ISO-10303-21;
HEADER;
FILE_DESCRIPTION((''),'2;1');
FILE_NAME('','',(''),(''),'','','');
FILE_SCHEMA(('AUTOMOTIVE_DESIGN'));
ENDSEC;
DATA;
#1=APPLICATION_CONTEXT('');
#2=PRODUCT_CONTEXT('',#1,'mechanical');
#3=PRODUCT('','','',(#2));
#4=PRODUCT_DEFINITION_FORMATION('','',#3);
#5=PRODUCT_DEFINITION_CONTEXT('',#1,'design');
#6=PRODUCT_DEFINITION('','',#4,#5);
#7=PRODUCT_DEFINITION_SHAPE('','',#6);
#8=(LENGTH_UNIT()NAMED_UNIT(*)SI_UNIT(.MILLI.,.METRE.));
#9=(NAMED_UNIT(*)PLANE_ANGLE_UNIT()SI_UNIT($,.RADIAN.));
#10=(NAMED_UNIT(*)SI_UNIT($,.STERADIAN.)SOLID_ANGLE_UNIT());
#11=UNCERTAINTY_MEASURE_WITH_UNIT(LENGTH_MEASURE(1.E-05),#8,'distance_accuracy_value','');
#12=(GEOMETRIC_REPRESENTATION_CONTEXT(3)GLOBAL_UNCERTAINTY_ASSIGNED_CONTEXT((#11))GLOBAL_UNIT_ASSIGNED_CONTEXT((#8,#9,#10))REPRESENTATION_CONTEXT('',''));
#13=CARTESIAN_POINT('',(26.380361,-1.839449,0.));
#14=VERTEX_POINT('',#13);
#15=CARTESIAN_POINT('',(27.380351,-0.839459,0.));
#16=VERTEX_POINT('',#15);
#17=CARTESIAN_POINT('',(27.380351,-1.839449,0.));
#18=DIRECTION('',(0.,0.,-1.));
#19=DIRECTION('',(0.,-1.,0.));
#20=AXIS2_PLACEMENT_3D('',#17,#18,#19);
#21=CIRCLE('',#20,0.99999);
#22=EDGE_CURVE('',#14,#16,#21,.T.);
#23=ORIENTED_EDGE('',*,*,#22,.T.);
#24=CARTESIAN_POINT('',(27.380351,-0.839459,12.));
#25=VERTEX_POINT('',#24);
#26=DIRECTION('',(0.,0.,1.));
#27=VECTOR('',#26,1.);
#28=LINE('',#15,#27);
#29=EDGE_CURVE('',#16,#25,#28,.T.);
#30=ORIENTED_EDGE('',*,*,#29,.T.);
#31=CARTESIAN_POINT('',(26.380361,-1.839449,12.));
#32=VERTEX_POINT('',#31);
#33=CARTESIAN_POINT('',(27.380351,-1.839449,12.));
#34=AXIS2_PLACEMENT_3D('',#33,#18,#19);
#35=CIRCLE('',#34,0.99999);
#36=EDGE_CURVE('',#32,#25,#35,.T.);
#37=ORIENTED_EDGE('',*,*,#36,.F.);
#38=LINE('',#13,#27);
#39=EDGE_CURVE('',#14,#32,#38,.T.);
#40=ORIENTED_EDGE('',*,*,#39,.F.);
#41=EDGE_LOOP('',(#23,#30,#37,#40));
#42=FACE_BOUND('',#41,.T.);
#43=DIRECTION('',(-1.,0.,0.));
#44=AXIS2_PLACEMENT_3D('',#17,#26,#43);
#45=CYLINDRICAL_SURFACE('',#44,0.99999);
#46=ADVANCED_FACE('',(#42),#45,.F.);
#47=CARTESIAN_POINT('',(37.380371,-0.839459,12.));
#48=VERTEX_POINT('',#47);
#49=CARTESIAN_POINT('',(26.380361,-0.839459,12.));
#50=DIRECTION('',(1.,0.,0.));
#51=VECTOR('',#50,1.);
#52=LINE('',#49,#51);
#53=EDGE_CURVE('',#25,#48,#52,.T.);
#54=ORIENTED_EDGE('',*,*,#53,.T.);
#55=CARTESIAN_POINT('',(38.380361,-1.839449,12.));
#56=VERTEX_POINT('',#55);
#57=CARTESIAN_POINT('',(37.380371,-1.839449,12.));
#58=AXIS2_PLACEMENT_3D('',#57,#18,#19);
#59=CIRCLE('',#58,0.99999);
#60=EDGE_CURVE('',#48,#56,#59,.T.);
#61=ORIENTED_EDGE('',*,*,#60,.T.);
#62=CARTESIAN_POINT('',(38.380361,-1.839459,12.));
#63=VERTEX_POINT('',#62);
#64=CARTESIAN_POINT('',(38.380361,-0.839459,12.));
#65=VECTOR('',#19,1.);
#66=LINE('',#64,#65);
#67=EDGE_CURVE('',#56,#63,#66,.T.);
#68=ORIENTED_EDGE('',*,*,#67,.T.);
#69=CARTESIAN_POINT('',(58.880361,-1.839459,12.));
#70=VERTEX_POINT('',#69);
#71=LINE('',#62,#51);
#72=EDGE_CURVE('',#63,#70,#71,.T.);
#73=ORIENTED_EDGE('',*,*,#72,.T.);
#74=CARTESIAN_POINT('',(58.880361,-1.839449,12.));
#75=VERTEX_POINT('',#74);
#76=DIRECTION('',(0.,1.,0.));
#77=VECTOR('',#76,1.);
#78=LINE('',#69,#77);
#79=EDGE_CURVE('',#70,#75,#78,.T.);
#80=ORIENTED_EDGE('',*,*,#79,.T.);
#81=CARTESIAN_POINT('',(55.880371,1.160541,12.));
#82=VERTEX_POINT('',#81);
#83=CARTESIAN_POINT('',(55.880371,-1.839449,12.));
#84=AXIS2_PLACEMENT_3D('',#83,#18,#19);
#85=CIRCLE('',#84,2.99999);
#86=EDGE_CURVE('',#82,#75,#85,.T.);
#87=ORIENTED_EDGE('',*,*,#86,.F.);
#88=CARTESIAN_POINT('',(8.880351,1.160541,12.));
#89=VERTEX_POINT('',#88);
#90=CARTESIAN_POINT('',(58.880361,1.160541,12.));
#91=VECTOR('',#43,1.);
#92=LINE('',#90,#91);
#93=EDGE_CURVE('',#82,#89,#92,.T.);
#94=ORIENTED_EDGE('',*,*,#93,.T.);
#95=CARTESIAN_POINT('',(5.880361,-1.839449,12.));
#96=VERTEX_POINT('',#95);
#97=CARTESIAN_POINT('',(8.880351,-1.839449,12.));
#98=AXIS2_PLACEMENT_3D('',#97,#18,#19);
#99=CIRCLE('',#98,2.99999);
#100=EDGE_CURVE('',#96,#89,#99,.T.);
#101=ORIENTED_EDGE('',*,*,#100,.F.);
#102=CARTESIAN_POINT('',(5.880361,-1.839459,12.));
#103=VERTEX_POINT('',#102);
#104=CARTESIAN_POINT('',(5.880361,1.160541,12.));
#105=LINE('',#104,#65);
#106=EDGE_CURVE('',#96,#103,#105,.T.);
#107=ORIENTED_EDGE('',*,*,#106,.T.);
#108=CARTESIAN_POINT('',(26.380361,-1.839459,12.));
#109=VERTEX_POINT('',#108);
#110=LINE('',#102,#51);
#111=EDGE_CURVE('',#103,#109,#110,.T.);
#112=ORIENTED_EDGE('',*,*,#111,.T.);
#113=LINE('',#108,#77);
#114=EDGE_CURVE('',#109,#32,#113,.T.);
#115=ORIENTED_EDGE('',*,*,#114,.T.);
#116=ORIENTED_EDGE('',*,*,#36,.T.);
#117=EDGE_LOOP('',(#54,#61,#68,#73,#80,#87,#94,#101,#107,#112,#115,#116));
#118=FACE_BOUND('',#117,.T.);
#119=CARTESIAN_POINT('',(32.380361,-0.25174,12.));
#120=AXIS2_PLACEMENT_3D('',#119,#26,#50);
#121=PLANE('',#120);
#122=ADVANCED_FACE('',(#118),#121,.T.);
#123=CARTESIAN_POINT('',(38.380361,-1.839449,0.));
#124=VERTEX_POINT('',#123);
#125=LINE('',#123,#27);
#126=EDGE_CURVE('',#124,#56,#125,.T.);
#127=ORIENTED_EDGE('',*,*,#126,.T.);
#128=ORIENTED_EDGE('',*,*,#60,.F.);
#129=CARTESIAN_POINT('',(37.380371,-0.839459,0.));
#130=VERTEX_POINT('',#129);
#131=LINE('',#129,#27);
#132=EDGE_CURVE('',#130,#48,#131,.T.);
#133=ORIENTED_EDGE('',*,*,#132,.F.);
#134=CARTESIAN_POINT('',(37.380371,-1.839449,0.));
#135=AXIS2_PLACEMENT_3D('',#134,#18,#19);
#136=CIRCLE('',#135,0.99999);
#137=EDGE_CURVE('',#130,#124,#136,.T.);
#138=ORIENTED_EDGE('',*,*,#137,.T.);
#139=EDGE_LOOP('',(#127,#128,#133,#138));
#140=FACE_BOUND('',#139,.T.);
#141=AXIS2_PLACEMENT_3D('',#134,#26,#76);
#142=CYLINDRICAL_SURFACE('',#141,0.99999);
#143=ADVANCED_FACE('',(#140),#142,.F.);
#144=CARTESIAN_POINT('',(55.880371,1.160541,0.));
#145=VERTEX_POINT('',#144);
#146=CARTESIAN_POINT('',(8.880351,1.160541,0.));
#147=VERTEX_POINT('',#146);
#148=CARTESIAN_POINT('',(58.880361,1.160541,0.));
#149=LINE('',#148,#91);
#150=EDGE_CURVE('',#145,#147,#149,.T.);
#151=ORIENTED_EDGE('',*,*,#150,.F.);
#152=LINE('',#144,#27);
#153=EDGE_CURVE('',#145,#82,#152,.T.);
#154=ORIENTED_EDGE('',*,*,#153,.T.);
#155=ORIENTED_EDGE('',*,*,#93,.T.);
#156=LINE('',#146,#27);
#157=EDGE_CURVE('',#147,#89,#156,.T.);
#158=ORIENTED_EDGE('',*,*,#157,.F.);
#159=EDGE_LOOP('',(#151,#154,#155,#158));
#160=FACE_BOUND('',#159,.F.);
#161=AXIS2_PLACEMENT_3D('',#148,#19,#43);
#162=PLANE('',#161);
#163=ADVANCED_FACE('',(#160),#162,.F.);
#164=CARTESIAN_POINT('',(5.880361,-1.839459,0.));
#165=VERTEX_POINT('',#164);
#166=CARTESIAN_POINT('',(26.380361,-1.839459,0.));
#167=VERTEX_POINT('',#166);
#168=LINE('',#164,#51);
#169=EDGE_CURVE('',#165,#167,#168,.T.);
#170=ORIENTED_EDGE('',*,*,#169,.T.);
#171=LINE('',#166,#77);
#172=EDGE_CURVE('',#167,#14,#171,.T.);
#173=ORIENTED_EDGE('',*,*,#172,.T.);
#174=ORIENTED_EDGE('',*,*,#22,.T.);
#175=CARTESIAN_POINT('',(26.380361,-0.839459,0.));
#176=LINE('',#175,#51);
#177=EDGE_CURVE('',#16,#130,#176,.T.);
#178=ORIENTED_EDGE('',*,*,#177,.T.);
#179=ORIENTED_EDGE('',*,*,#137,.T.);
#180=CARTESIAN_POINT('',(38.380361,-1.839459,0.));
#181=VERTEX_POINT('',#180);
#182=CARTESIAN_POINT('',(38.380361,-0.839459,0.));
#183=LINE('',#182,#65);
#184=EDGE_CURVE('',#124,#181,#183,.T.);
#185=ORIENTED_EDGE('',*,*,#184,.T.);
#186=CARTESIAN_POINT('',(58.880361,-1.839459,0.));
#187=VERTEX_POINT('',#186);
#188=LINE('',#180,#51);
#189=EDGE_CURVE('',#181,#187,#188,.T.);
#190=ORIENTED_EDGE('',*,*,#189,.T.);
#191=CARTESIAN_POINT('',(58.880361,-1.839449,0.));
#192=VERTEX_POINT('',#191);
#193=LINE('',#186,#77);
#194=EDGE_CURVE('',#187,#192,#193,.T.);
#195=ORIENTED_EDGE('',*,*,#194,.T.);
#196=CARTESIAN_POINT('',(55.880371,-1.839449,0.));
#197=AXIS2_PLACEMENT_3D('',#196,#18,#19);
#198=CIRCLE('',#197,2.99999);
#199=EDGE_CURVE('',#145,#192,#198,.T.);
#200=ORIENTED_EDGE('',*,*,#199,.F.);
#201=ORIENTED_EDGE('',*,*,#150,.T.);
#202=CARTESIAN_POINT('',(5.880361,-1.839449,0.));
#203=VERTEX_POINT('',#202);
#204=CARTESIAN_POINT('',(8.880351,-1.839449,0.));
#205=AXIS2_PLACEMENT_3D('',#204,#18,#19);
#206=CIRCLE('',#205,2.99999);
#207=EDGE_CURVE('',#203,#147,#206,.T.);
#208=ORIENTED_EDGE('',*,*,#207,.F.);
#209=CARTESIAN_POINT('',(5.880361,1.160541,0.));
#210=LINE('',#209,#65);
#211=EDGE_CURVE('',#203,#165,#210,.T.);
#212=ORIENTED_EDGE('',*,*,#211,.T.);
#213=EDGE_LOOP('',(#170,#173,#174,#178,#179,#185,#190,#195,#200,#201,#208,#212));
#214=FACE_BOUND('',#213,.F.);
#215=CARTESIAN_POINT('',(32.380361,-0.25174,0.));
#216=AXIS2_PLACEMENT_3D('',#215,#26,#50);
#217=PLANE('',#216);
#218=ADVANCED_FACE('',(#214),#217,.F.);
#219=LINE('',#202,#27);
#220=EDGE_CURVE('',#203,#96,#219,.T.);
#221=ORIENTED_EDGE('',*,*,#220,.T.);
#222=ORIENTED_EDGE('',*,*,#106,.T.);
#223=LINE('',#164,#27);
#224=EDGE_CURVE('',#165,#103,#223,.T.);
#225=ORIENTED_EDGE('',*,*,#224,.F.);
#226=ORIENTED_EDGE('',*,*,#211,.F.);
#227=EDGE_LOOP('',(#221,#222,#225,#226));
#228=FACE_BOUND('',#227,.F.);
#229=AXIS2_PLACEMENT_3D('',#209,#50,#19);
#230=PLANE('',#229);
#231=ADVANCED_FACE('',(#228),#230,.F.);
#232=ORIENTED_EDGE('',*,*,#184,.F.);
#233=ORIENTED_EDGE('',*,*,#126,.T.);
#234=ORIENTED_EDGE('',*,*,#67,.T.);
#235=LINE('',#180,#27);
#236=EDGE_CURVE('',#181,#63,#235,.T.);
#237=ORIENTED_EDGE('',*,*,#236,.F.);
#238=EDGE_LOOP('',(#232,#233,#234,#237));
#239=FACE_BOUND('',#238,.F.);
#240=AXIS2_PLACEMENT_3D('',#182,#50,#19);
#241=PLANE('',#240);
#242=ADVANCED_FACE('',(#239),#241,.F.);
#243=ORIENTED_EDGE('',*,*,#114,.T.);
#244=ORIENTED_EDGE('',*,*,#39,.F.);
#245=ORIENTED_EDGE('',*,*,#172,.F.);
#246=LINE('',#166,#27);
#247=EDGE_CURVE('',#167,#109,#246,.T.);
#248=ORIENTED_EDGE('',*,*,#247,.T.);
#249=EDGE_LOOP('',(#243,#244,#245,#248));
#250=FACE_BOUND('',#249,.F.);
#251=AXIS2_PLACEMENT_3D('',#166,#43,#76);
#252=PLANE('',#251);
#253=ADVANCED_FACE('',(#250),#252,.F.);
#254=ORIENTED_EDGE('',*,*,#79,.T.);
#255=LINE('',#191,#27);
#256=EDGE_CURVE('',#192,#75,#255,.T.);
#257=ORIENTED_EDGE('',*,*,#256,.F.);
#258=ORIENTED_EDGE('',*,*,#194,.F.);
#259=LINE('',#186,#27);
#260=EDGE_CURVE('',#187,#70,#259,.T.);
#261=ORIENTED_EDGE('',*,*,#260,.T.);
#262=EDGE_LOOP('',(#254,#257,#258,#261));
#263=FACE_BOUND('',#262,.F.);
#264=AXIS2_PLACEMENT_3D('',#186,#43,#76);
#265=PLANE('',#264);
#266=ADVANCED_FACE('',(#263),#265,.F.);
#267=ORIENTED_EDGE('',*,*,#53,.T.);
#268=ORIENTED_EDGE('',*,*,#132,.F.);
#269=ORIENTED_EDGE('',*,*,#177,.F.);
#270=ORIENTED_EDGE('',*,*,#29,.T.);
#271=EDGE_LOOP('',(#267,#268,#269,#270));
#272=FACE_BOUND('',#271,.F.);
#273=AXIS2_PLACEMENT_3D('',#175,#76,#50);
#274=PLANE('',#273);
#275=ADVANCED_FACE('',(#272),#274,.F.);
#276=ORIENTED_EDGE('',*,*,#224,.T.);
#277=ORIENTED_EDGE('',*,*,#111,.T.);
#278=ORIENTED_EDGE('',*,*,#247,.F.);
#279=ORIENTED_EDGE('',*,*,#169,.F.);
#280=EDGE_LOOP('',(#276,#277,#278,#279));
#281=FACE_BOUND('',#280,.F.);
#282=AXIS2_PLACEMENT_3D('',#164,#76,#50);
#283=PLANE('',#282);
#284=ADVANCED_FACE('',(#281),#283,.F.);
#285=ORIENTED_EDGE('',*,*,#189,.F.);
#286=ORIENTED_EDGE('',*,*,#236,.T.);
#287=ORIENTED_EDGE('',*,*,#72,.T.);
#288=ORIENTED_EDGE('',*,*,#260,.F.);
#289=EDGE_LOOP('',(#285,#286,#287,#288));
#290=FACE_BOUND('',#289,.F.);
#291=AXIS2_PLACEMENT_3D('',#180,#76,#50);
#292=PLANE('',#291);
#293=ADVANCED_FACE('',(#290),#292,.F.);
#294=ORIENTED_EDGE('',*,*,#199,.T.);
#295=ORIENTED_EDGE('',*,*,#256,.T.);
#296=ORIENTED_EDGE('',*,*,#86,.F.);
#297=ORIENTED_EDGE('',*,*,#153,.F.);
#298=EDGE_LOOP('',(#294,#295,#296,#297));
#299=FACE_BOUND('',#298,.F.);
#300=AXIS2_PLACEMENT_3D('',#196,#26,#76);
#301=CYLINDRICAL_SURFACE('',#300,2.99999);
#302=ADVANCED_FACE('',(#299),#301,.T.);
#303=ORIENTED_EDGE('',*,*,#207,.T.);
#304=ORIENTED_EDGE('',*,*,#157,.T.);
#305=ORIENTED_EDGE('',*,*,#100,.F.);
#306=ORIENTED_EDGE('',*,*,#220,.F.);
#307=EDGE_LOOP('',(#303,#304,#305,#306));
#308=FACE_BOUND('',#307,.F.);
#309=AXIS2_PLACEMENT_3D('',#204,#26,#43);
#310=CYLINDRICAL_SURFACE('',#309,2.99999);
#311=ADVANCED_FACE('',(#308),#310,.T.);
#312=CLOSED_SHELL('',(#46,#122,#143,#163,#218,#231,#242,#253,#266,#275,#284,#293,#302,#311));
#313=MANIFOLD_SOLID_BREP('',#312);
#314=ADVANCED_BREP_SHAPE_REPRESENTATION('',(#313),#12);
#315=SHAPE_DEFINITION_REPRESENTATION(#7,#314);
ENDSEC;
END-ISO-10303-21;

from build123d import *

# Parameters (mm, degrees)
F1_DEPTH = 12
F2_R     = 0.99999
F3_R     = 2.99999


# Not quite as in the source:
# - a fillet or chamfer is up to 0.001 mm smaller than in the source, because OpenCascade refuses the exact size


with BuildPart() as f1:
    # F0 (on Top) → F1 (new body)
    with BuildSketch(Plane.XY):
        Polygon((23.3803613689, 1.1605409955), (5.8803613689, 1.1605409955), (5.8803613689, -1.8394590045), (26.3803613689, -1.8394590045), (26.3803613689, -0.8394590045), (38.3803613689, -0.8394590045), (38.3803613689, -1.8394590045), (58.8803613689, -1.8394590045), (58.8803613689, 1.1605409955), (41.3803613689, 1.1605409955), align=None)
    extrude(amount=F1_DEPTH)

    # F2 (radius 1 in the source; OpenCascade refuses exactly that, so slightly less here)
    f2_edges = [f1.edges().sort_by_distance(p)[0] for p in [
        (38.380361, -0.839459, 6),
        (26.380361, -0.839459, 6),
    ]]
    fillet(f2_edges, radius=F2_R)

    # F3 (radius 3 in the source; OpenCascade refuses exactly that, so slightly less here)
    f3_edges = [f1.edges().sort_by_distance(p)[0] for p in [
        (5.880361, 1.160541, 6),
        (58.880361, 1.160541, 6),
    ]]
    fillet(f3_edges, radius=F3_R)


solid = f1.part
